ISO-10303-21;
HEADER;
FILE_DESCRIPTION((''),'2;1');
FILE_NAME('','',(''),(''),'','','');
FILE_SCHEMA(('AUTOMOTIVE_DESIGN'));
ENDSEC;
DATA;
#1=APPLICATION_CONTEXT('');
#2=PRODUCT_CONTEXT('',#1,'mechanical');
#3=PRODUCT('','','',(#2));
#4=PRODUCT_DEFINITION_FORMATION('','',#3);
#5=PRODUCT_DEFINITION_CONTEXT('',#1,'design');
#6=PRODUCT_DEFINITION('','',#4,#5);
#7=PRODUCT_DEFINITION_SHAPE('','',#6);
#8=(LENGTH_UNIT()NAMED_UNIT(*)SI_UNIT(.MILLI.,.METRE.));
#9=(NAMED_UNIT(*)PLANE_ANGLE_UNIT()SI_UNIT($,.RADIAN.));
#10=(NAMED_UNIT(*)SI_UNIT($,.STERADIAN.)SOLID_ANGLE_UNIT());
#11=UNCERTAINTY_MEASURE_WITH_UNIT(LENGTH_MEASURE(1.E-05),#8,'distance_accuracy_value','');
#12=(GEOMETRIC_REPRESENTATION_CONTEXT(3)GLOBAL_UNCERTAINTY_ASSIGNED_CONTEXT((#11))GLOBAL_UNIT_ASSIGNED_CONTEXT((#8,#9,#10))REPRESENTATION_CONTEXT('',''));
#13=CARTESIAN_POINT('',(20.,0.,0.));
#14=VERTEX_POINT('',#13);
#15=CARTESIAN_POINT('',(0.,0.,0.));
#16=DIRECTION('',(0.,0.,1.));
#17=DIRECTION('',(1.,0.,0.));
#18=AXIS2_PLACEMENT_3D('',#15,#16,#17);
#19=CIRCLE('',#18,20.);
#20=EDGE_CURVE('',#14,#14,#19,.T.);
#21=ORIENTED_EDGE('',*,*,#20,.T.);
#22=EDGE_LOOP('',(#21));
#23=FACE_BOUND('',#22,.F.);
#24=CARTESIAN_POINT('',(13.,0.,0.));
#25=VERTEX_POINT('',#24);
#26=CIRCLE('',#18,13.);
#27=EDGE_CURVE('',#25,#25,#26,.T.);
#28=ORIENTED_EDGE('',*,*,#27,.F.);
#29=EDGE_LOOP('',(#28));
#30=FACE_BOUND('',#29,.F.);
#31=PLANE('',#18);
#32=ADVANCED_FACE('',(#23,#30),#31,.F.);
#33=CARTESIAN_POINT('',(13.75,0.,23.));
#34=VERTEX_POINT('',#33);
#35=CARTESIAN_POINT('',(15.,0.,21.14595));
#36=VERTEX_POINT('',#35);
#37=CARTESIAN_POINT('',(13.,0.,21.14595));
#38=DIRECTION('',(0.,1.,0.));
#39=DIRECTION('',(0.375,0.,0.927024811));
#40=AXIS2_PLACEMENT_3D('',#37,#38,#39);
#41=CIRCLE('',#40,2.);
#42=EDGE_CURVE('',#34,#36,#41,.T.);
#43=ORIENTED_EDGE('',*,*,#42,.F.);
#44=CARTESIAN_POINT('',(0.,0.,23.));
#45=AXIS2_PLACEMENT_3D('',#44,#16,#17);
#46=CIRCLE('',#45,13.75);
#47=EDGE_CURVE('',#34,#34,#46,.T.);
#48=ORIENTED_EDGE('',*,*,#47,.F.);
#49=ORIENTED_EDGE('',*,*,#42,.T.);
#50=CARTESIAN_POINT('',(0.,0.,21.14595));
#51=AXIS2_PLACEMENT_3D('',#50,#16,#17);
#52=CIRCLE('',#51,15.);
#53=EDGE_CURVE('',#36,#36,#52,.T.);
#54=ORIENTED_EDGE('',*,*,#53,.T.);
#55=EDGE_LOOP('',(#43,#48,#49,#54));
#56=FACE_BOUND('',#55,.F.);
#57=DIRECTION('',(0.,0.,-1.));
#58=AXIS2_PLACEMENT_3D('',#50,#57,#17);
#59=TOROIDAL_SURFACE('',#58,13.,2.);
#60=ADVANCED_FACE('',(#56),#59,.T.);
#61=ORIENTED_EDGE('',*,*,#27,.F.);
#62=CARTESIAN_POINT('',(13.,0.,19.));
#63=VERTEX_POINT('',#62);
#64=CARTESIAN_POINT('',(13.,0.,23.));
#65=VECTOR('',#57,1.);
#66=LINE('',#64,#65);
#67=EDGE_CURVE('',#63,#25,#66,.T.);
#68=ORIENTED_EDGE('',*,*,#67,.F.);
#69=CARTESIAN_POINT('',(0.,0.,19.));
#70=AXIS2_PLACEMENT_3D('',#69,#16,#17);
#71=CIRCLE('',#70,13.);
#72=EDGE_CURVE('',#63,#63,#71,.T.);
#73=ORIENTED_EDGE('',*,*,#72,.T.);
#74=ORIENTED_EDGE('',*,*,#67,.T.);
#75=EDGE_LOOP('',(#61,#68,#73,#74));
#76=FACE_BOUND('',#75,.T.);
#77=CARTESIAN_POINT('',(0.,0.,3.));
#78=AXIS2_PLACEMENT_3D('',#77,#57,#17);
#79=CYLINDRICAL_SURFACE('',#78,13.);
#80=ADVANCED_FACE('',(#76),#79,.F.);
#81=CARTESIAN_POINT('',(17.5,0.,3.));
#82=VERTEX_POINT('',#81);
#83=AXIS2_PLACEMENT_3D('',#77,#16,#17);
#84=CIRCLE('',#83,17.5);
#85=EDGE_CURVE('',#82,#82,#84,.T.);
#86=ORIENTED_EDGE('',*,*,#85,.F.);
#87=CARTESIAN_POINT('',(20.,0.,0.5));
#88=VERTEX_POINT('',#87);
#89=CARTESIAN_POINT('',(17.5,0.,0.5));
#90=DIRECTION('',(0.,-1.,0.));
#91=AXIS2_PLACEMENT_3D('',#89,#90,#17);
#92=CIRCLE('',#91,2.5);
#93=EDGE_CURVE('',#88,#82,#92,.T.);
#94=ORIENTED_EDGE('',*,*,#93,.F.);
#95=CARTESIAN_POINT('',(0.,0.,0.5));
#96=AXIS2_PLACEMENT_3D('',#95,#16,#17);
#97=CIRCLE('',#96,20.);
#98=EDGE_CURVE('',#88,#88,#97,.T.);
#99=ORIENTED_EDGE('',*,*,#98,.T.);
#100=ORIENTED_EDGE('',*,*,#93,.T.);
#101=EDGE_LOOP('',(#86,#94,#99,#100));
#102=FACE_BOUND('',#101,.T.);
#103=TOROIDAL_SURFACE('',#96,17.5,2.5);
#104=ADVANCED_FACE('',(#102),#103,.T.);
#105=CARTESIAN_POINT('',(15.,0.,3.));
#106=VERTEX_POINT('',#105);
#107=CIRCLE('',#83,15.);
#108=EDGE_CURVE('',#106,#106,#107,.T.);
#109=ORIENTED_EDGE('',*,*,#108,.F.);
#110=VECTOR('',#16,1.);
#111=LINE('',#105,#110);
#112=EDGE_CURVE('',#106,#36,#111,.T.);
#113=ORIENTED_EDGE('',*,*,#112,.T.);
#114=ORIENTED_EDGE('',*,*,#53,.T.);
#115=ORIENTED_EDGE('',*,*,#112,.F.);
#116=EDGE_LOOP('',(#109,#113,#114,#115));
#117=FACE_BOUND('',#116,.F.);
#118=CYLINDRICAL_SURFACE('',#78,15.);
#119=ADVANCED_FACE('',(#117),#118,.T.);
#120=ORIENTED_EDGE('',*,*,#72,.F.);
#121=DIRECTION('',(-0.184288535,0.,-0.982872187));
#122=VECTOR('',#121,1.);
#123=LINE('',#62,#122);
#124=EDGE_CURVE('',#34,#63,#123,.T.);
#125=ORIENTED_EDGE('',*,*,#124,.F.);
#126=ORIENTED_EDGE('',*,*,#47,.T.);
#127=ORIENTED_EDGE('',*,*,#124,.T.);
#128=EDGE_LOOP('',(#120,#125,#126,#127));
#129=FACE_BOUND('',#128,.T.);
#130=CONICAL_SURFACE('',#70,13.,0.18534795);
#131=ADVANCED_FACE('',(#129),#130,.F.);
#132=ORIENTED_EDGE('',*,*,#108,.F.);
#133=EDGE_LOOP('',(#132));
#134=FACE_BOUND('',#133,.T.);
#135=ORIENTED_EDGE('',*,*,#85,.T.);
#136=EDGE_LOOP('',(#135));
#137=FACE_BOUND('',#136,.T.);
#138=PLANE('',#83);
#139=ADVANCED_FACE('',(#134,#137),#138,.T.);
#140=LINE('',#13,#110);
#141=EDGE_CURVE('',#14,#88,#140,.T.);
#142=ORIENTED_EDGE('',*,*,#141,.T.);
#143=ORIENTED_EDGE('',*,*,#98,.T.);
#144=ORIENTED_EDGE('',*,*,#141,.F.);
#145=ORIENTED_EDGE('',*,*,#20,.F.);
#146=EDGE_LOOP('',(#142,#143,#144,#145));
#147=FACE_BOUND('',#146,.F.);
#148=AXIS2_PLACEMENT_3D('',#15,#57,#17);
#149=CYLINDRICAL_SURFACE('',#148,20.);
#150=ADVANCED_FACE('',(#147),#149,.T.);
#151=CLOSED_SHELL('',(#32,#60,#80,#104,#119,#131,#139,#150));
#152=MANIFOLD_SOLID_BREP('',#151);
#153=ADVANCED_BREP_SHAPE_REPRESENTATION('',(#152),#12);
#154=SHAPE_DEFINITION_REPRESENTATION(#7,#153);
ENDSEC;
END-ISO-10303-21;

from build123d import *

# Parameters (mm, degrees)
F0_R     = 20
F0_R_2   = 13
F1_DEPTH = 3
F2_R     = 15
F2_R_2   = 13
F3_DEPTH = 20
F4_R     = 2.5
F5_SIZE2 = 4
F5_SIZE  = 0.75


# Not quite as in the source:
# - a fillet or chamfer that OpenCascade refuses, or shapes differently, is made with other operations: its cross-section is extruded or revolved along the edge and cut away or added


with BuildPart() as f1:
    # F0 (on Top) → F1 (new body)
    with BuildSketch(Plane.XY):
        Circle(F0_R)
        Circle(F0_R_2, mode=Mode.SUBTRACT)
    extrude(amount=F1_DEPTH)

    # F2 (on face) → F3 (join)
    with BuildSketch(Plane.XY.offset(3)):
        Circle(F2_R)
        Circle(F2_R_2, mode=Mode.SUBTRACT)
    extrude(amount=F3_DEPTH)

    # F4
    f4_edges = [f1.edges().sort_by_distance(p)[0] for p in [
        (-20, 0, 3),
    ]]
    fillet(f4_edges, radius=F4_R)

    # F5
    f5_edges = [f1.edges().sort_by_distance(p)[0] for p in [
        (-13, 0, 23),
    ]]
    f5_side = f1.faces().sort_by_distance((-14.575736, 0, 23))[0]
    chamfer(f5_edges, length=F5_SIZE, length2=F5_SIZE2, reference=f5_side)

    # F6: fillet of radius 2 on 1 edges, made by hand

    # F6_s1 → F6_t2 (revolve, cut)
    with BuildSketch(Plane.XZ):
        with BuildLine():
            ThreePointArc((13.75, 23), (14.6583123952, 22.263984367), (15, 21.1459503782))
            Line((15, 21.1459503782), (15, 23))
            Line((15, 23), (13.75, 23))
        make_face()
    revolve(axis=Axis((0, 0, 23), (0, 0, 1)), mode=Mode.SUBTRACT)


solid = f1.part
